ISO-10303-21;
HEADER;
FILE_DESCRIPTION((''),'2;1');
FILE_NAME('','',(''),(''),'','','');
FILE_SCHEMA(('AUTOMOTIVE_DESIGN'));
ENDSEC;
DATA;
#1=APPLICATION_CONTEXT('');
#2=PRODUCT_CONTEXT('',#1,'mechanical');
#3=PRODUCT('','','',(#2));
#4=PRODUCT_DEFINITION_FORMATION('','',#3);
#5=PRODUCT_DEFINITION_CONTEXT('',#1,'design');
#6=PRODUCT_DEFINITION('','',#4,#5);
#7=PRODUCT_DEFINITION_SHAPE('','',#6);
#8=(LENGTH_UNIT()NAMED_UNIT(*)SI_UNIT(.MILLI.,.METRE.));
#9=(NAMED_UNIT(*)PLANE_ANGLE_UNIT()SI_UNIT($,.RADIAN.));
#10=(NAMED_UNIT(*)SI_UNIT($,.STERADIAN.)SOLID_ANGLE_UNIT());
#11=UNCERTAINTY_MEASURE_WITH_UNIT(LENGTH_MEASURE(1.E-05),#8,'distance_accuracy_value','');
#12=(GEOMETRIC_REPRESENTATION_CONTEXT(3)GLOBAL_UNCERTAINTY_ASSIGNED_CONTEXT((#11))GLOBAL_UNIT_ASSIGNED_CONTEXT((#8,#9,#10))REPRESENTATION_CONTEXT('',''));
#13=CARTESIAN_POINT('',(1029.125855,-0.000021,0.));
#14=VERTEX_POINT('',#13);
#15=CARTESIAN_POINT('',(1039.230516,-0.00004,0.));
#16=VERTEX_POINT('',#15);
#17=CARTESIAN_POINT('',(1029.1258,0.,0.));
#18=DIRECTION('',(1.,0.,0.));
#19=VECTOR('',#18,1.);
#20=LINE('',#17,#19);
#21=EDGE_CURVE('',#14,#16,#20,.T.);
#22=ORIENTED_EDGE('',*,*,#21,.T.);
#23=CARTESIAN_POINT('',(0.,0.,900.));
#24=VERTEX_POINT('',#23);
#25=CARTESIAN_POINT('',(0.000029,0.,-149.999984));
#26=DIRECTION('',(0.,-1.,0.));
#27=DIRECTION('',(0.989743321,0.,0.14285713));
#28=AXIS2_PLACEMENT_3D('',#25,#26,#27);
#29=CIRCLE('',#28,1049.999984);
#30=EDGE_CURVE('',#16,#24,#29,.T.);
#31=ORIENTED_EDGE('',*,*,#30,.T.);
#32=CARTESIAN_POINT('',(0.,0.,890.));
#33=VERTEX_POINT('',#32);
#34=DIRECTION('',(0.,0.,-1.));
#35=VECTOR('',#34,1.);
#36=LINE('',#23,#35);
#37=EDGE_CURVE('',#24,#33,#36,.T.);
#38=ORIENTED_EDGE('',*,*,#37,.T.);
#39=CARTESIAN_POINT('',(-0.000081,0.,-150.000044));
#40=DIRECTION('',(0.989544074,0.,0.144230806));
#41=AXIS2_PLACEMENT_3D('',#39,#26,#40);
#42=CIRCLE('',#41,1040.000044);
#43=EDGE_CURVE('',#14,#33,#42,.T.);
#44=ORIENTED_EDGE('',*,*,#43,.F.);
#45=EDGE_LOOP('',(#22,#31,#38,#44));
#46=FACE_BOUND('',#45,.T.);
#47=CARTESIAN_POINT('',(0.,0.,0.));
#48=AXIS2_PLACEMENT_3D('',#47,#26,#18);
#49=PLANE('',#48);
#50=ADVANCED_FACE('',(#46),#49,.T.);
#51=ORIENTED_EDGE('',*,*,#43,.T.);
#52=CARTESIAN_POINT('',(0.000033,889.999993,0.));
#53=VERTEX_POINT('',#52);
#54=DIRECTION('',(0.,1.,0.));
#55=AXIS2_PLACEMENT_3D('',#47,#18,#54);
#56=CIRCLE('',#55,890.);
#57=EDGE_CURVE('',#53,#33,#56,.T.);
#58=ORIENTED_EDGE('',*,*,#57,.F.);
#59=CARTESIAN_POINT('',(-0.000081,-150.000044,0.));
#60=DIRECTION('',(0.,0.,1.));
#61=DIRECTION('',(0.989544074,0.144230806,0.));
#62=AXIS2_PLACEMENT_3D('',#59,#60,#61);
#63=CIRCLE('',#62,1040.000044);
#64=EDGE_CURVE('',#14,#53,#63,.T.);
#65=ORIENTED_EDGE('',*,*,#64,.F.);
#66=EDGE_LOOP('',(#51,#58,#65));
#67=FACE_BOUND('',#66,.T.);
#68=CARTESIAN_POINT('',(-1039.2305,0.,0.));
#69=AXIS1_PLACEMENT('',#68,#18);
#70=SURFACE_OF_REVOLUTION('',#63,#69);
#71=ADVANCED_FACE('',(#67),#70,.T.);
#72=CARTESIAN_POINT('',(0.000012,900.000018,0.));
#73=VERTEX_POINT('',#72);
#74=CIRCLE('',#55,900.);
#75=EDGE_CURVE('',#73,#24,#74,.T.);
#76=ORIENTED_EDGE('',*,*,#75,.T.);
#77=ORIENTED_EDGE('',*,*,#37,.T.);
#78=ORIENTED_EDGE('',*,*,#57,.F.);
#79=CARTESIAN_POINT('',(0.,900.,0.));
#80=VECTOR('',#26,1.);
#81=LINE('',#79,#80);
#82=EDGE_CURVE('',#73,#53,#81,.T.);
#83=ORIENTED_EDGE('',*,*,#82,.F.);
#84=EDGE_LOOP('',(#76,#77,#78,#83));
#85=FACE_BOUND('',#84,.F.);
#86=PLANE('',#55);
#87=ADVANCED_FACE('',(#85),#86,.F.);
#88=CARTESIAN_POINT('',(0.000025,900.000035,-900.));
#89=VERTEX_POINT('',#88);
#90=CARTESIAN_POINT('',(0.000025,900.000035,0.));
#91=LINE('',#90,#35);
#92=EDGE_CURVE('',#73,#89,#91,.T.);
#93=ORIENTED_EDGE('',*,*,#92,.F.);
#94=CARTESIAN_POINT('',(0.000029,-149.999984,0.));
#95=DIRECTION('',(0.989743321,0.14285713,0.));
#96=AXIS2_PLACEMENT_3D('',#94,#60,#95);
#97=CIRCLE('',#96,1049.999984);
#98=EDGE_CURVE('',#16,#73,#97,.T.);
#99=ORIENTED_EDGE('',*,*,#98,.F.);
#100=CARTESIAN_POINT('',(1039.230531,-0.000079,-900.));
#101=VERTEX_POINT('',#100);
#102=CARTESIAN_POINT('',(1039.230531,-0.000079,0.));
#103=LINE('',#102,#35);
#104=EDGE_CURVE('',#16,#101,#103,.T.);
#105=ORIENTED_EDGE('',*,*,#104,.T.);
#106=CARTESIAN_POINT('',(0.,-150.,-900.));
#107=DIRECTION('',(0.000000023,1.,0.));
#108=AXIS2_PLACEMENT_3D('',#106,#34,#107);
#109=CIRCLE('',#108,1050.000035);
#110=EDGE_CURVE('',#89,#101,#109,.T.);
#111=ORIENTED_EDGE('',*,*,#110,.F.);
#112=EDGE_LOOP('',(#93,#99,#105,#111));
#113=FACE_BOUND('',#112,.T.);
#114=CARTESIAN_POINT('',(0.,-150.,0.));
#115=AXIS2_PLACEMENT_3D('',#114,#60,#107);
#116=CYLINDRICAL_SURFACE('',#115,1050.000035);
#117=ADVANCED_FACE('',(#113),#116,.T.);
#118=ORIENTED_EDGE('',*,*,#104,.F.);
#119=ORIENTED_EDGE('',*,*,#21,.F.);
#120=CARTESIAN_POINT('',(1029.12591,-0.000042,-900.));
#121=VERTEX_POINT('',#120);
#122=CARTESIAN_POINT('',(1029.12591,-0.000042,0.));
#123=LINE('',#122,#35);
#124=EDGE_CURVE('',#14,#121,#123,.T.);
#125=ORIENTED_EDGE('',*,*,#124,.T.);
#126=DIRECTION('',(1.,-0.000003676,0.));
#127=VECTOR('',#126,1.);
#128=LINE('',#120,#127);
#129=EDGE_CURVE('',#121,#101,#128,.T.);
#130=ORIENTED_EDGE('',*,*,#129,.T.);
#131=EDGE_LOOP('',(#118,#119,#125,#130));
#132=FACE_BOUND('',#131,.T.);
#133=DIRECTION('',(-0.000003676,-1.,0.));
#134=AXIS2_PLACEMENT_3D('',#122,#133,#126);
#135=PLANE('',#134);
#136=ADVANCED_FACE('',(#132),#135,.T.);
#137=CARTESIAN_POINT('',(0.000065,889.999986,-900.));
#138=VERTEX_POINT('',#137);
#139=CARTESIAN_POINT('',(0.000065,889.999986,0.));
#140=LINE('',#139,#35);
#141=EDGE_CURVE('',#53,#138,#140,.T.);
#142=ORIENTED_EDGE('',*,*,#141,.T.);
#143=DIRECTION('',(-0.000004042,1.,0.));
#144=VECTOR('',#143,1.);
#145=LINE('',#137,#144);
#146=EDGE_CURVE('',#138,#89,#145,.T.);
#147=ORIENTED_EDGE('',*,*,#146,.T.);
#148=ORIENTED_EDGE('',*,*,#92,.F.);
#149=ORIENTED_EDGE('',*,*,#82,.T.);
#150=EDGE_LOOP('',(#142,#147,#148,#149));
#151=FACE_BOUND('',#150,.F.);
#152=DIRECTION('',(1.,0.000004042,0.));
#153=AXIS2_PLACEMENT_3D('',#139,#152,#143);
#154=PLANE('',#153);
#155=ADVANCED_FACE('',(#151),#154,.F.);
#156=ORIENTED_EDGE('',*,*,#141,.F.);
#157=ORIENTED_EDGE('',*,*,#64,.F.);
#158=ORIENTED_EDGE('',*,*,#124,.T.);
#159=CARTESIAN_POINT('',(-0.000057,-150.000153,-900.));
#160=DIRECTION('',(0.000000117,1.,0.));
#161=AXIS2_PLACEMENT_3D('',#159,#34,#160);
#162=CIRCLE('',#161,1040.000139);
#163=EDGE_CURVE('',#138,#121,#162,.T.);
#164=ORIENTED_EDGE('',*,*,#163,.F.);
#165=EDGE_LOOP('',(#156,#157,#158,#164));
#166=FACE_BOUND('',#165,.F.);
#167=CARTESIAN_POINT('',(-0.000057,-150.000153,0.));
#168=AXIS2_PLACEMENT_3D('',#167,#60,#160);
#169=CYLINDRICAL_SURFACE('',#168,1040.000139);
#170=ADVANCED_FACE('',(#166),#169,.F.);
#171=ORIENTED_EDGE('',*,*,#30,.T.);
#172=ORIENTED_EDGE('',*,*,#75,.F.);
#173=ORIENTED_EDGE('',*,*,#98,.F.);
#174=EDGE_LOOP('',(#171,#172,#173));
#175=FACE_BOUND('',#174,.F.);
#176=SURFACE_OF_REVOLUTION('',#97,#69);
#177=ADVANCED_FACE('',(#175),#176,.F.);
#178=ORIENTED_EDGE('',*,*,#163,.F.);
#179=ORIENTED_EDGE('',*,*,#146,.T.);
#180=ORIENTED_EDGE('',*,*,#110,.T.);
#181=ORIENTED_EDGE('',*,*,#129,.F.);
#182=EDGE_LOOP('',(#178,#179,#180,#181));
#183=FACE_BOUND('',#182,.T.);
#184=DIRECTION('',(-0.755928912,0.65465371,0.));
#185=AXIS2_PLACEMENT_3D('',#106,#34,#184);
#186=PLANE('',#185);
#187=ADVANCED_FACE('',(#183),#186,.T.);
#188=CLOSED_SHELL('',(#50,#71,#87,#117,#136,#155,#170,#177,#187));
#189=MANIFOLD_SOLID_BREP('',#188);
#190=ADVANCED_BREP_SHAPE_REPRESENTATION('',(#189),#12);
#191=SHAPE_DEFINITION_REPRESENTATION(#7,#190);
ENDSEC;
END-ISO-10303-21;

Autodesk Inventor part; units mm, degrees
ref_plane "XZ Plane" through (0, 0, 0) normal (0, 1, 0) x (-1, 0, 0)
sketch "Sketch1" plane through (0, 0, 0) normal (0, 0, 1) x (1, 0, 0)
  arc A0 (0, 900) -> (-1039.2305, 0) centre (0, -150) ccw
  arc A1 (1039.2305, 0) -> (0, 900) centre (0, -150) ccw
  arc A2 (0, 890) -> (-1029.1258, 0) centre (0, -150) ccw
  arc A3 (1029.1258, 0) -> (0, 890) centre (0, -150) ccw
  line L0 (1029.1258, 0) -> (1039.2305, 0)
  line L1 (-1039.2305, 0) -> (-1029.1258, 0)
  point P0 (0, 0)
  dimension "d0" = 0
  dimension "d1" = 0
  dimension "d2" = 0
  dimension "d3" = 150
  dimension "d6" = 900
  dimension "d8" = 1039.2305
  dimension "d10" = 0
  dimension "d11" = 10
  dimension "d12" = 0
revolve "Revolution2" add sketch "Sketch1" angle 90 about axis through (1029.1258, 0, 0) along (1, 0, 0)
ref_plane "end1" through (-1039.2305, 0, 0) normal (1, 0, 0) x (0, 1, 0)
sketch "Sketch3" plane through (-1039.2305, 0, 0) normal (1, 0, 0) x (0, 1, 0)
  line L0 (900, 0) -> (0, 0) projected
  line L1 (0, 900) -> (0, 0) projected
  line L2 (900, 0) -> (0, 0)
  line L3 (0, 0) -> (0, 900)
  line L4 (0, 900) -> (900, 900)
  line L5 (900, 900) -> (900, 0)
extrude "Extrusion1" cut sketch "Sketch3" along normal blind 1039.2305
ref_plane "end2" through (1039.2305, 0, 0) normal (1, 0, 0) x (0, 1, 0)
sketch "Sketch4" plane through (0, -150, 0) normal (0, 0, -1) x (-0.7559289, 0.6546537, 0)
  arc A0 (687.3864, 793.7254) -> (-687.3864, 793.7254) centre (0, 0) ccw projected
  arc A1 (680.8398, 786.1661) -> (-679.748, 787.1104) centre (0, 0) ccw projected
  line L0 (680.8398, 786.1661) -> (687.3864, 793.7254) projected
  line L1 (-679.748, 787.1104) -> (-687.3864, 793.7254) projected
  point P0 (98.1981, 113.3893)
extrude "Extrusion2" add sketch "Sketch4" along normal blind 900
equation "\"d14\" = d8"
properties part number "cover2_sule_extended"
